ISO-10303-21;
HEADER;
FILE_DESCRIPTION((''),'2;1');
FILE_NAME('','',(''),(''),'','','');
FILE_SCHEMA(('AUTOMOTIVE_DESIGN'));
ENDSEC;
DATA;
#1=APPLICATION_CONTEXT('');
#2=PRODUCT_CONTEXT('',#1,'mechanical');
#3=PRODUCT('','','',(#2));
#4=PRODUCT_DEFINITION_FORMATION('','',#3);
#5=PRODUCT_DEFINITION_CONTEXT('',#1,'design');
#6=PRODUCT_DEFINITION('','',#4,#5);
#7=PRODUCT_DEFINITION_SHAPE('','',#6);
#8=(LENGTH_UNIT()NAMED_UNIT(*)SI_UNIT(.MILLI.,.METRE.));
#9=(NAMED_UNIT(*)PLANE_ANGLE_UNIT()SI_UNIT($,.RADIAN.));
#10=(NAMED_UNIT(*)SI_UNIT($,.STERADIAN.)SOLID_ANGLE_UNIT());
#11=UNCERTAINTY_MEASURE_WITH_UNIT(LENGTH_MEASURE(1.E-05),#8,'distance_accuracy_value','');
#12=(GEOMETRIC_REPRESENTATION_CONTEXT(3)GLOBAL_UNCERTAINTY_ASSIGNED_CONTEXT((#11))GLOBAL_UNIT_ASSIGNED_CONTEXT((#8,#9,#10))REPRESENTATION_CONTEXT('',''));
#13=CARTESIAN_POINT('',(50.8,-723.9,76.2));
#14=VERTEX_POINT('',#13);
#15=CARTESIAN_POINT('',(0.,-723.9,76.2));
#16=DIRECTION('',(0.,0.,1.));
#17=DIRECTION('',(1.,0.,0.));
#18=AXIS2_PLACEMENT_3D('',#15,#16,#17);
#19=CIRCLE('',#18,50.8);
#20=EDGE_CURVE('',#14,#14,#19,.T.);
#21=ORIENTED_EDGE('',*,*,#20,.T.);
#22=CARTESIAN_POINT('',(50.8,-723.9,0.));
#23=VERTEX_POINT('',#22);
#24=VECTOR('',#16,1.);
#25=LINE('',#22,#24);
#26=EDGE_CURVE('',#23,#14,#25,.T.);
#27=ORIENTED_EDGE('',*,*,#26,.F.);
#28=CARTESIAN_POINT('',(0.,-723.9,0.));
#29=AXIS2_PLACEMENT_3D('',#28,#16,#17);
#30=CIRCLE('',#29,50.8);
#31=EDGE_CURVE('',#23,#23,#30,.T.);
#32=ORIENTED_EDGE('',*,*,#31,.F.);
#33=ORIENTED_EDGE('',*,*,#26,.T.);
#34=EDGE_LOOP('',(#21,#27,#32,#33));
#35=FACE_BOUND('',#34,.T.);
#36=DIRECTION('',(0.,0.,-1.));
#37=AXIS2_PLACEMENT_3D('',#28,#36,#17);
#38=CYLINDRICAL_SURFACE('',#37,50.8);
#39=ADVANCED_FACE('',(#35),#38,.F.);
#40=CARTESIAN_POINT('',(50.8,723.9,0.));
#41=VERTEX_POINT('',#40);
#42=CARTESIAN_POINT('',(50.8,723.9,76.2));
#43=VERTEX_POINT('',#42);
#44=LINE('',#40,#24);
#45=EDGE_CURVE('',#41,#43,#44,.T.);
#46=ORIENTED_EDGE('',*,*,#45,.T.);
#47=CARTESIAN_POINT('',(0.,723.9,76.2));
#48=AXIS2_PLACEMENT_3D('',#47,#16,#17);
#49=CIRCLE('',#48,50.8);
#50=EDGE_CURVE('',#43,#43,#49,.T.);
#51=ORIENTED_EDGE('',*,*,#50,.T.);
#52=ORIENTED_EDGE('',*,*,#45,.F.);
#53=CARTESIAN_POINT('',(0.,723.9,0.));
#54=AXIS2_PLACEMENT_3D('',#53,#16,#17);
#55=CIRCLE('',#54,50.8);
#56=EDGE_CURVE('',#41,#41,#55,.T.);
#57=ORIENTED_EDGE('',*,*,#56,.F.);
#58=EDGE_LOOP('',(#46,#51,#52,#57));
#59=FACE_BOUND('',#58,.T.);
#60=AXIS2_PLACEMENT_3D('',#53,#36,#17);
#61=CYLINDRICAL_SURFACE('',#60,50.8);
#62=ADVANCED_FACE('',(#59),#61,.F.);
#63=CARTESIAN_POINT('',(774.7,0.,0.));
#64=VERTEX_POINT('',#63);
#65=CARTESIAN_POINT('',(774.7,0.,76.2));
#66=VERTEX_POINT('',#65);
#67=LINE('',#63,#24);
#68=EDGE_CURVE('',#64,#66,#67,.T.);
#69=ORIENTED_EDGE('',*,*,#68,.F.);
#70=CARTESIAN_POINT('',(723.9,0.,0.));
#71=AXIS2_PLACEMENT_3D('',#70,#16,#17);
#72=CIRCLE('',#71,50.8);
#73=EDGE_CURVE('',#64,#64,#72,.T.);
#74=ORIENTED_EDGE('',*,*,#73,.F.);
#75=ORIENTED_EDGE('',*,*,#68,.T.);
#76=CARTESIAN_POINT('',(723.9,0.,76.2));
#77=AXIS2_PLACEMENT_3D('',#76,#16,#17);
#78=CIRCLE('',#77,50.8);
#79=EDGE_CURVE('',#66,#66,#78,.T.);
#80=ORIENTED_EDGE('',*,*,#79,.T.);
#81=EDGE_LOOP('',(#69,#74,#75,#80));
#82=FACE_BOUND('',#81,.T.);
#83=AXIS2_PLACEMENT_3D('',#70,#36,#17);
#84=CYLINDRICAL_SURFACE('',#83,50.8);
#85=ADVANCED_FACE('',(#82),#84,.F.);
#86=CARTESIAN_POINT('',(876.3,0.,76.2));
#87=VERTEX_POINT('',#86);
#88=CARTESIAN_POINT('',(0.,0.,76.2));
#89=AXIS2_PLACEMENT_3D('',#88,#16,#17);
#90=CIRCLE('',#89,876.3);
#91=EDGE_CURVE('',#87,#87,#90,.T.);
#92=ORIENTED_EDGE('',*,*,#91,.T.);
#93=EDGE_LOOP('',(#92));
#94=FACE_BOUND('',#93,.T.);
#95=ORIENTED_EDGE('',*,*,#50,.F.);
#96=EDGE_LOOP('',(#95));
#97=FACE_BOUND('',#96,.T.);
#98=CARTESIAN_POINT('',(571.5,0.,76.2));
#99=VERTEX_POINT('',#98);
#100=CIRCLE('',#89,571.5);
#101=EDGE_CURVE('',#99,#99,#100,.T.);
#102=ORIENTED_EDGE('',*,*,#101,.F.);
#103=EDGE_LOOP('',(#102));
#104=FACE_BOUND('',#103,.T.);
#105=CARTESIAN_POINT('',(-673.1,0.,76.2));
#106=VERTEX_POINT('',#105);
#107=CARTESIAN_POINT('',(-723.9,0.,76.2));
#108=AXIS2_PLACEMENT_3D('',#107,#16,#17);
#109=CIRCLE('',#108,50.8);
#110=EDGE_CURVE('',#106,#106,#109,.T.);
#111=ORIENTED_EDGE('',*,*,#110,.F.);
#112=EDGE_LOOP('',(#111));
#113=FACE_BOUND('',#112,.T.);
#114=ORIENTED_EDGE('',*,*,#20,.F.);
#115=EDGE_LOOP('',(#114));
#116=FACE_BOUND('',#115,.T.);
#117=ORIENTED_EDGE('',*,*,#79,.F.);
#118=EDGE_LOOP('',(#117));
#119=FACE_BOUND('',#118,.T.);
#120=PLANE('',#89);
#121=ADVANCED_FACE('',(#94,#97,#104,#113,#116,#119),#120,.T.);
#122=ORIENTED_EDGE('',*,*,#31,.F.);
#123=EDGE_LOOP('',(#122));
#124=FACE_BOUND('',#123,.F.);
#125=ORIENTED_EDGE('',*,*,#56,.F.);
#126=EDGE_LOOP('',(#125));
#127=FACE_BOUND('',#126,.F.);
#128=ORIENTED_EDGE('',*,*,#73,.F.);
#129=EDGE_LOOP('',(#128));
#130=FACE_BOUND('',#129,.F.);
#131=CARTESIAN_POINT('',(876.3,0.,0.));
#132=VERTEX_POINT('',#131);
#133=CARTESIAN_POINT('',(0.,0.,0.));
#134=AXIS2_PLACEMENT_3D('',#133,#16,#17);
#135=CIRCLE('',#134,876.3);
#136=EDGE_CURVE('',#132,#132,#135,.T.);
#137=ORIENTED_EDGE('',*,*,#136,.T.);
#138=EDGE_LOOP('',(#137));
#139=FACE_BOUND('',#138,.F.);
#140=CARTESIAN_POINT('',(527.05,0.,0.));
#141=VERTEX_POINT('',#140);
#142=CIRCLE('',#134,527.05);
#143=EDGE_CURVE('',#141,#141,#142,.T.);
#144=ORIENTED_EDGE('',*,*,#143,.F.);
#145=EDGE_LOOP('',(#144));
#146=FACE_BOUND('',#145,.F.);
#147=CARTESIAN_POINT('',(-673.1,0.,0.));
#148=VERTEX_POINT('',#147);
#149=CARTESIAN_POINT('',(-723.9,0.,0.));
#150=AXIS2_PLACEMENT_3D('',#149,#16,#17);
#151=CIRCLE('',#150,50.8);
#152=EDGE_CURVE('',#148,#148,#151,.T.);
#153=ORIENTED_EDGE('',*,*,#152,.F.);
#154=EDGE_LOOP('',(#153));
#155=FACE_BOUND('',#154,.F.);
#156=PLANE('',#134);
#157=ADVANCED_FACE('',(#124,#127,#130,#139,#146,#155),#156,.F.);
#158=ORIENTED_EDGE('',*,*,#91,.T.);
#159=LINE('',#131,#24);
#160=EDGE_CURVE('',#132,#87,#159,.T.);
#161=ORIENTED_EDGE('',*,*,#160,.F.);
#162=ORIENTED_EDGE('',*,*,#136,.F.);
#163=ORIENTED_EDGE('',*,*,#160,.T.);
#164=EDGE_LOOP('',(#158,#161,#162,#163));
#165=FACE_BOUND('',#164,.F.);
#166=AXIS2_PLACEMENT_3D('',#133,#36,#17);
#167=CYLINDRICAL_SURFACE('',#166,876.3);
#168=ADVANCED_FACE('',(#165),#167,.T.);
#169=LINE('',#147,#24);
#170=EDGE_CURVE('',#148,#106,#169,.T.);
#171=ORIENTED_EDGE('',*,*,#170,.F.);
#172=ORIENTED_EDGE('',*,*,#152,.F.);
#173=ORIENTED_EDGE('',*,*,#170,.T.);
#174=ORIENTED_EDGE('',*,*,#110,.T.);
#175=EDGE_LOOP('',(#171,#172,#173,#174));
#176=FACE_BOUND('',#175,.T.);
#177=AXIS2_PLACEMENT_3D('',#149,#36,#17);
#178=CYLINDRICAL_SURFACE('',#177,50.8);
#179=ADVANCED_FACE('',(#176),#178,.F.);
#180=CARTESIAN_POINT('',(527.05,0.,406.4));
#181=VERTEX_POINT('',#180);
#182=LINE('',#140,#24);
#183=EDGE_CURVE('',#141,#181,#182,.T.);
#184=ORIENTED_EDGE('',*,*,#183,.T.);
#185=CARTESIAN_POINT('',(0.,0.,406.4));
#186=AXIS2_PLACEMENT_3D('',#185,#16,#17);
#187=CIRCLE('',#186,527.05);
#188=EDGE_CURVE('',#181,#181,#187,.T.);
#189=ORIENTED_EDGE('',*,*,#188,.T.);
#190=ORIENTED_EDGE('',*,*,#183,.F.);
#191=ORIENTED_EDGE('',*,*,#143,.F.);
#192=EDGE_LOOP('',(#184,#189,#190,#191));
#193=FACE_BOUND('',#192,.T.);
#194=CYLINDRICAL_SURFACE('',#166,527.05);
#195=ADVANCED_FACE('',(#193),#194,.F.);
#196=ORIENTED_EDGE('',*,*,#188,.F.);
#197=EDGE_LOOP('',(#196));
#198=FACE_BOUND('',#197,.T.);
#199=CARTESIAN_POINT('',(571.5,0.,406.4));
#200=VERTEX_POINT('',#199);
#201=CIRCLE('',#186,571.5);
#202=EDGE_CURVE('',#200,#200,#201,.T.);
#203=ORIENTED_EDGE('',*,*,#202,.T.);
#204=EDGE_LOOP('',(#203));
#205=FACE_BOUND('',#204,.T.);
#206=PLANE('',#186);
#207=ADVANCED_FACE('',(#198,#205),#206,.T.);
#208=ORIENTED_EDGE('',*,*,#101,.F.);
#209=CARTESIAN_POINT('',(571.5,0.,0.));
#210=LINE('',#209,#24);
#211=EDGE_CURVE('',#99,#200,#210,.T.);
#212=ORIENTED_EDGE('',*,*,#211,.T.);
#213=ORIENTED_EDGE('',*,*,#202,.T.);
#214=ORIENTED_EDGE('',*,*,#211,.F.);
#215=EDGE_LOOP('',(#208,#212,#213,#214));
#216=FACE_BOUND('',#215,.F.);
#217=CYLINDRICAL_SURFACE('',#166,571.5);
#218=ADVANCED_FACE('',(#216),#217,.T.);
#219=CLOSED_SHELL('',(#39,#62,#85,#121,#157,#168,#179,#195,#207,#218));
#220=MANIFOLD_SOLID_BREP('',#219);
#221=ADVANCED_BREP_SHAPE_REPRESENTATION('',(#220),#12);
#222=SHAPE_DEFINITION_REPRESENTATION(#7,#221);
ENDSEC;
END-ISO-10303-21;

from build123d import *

# Parameters (mm, degrees)
F0_R     = 876.3
F0_R_2   = 50.8
F0_R_3   = 571.5
F1_DEPTH = 76.2
F0_R_4   = 527.05
F2_DEPTH = 406.4


# Not quite as in the source:
# - a feature names something its author has since deleted; it is built from what else it names


with BuildPart() as f1:
    # F0 (on Top) → F1 (new body)
    with BuildSketch(Plane.XY):
        Circle(F0_R)
        with Locations((0, -723.9)):
            Circle(F0_R_2, mode=Mode.SUBTRACT)
        with Locations((-723.9, 0)):
            Circle(F0_R_2, mode=Mode.SUBTRACT)
        Circle(F0_R_3, mode=Mode.SUBTRACT)
        with Locations((723.9, 0)):
            Circle(F0_R_2, mode=Mode.SUBTRACT)
        with Locations((0, 723.9)):
            Circle(F0_R_2, mode=Mode.SUBTRACT)
    extrude(amount=F1_DEPTH)

    # F0 (on Top) → F2 (join)
    with BuildSketch(Plane.XY):
        Circle(F0_R_3)
        Circle(F0_R_4, mode=Mode.SUBTRACT)
    extrude(amount=F2_DEPTH)


solid = f1.part
